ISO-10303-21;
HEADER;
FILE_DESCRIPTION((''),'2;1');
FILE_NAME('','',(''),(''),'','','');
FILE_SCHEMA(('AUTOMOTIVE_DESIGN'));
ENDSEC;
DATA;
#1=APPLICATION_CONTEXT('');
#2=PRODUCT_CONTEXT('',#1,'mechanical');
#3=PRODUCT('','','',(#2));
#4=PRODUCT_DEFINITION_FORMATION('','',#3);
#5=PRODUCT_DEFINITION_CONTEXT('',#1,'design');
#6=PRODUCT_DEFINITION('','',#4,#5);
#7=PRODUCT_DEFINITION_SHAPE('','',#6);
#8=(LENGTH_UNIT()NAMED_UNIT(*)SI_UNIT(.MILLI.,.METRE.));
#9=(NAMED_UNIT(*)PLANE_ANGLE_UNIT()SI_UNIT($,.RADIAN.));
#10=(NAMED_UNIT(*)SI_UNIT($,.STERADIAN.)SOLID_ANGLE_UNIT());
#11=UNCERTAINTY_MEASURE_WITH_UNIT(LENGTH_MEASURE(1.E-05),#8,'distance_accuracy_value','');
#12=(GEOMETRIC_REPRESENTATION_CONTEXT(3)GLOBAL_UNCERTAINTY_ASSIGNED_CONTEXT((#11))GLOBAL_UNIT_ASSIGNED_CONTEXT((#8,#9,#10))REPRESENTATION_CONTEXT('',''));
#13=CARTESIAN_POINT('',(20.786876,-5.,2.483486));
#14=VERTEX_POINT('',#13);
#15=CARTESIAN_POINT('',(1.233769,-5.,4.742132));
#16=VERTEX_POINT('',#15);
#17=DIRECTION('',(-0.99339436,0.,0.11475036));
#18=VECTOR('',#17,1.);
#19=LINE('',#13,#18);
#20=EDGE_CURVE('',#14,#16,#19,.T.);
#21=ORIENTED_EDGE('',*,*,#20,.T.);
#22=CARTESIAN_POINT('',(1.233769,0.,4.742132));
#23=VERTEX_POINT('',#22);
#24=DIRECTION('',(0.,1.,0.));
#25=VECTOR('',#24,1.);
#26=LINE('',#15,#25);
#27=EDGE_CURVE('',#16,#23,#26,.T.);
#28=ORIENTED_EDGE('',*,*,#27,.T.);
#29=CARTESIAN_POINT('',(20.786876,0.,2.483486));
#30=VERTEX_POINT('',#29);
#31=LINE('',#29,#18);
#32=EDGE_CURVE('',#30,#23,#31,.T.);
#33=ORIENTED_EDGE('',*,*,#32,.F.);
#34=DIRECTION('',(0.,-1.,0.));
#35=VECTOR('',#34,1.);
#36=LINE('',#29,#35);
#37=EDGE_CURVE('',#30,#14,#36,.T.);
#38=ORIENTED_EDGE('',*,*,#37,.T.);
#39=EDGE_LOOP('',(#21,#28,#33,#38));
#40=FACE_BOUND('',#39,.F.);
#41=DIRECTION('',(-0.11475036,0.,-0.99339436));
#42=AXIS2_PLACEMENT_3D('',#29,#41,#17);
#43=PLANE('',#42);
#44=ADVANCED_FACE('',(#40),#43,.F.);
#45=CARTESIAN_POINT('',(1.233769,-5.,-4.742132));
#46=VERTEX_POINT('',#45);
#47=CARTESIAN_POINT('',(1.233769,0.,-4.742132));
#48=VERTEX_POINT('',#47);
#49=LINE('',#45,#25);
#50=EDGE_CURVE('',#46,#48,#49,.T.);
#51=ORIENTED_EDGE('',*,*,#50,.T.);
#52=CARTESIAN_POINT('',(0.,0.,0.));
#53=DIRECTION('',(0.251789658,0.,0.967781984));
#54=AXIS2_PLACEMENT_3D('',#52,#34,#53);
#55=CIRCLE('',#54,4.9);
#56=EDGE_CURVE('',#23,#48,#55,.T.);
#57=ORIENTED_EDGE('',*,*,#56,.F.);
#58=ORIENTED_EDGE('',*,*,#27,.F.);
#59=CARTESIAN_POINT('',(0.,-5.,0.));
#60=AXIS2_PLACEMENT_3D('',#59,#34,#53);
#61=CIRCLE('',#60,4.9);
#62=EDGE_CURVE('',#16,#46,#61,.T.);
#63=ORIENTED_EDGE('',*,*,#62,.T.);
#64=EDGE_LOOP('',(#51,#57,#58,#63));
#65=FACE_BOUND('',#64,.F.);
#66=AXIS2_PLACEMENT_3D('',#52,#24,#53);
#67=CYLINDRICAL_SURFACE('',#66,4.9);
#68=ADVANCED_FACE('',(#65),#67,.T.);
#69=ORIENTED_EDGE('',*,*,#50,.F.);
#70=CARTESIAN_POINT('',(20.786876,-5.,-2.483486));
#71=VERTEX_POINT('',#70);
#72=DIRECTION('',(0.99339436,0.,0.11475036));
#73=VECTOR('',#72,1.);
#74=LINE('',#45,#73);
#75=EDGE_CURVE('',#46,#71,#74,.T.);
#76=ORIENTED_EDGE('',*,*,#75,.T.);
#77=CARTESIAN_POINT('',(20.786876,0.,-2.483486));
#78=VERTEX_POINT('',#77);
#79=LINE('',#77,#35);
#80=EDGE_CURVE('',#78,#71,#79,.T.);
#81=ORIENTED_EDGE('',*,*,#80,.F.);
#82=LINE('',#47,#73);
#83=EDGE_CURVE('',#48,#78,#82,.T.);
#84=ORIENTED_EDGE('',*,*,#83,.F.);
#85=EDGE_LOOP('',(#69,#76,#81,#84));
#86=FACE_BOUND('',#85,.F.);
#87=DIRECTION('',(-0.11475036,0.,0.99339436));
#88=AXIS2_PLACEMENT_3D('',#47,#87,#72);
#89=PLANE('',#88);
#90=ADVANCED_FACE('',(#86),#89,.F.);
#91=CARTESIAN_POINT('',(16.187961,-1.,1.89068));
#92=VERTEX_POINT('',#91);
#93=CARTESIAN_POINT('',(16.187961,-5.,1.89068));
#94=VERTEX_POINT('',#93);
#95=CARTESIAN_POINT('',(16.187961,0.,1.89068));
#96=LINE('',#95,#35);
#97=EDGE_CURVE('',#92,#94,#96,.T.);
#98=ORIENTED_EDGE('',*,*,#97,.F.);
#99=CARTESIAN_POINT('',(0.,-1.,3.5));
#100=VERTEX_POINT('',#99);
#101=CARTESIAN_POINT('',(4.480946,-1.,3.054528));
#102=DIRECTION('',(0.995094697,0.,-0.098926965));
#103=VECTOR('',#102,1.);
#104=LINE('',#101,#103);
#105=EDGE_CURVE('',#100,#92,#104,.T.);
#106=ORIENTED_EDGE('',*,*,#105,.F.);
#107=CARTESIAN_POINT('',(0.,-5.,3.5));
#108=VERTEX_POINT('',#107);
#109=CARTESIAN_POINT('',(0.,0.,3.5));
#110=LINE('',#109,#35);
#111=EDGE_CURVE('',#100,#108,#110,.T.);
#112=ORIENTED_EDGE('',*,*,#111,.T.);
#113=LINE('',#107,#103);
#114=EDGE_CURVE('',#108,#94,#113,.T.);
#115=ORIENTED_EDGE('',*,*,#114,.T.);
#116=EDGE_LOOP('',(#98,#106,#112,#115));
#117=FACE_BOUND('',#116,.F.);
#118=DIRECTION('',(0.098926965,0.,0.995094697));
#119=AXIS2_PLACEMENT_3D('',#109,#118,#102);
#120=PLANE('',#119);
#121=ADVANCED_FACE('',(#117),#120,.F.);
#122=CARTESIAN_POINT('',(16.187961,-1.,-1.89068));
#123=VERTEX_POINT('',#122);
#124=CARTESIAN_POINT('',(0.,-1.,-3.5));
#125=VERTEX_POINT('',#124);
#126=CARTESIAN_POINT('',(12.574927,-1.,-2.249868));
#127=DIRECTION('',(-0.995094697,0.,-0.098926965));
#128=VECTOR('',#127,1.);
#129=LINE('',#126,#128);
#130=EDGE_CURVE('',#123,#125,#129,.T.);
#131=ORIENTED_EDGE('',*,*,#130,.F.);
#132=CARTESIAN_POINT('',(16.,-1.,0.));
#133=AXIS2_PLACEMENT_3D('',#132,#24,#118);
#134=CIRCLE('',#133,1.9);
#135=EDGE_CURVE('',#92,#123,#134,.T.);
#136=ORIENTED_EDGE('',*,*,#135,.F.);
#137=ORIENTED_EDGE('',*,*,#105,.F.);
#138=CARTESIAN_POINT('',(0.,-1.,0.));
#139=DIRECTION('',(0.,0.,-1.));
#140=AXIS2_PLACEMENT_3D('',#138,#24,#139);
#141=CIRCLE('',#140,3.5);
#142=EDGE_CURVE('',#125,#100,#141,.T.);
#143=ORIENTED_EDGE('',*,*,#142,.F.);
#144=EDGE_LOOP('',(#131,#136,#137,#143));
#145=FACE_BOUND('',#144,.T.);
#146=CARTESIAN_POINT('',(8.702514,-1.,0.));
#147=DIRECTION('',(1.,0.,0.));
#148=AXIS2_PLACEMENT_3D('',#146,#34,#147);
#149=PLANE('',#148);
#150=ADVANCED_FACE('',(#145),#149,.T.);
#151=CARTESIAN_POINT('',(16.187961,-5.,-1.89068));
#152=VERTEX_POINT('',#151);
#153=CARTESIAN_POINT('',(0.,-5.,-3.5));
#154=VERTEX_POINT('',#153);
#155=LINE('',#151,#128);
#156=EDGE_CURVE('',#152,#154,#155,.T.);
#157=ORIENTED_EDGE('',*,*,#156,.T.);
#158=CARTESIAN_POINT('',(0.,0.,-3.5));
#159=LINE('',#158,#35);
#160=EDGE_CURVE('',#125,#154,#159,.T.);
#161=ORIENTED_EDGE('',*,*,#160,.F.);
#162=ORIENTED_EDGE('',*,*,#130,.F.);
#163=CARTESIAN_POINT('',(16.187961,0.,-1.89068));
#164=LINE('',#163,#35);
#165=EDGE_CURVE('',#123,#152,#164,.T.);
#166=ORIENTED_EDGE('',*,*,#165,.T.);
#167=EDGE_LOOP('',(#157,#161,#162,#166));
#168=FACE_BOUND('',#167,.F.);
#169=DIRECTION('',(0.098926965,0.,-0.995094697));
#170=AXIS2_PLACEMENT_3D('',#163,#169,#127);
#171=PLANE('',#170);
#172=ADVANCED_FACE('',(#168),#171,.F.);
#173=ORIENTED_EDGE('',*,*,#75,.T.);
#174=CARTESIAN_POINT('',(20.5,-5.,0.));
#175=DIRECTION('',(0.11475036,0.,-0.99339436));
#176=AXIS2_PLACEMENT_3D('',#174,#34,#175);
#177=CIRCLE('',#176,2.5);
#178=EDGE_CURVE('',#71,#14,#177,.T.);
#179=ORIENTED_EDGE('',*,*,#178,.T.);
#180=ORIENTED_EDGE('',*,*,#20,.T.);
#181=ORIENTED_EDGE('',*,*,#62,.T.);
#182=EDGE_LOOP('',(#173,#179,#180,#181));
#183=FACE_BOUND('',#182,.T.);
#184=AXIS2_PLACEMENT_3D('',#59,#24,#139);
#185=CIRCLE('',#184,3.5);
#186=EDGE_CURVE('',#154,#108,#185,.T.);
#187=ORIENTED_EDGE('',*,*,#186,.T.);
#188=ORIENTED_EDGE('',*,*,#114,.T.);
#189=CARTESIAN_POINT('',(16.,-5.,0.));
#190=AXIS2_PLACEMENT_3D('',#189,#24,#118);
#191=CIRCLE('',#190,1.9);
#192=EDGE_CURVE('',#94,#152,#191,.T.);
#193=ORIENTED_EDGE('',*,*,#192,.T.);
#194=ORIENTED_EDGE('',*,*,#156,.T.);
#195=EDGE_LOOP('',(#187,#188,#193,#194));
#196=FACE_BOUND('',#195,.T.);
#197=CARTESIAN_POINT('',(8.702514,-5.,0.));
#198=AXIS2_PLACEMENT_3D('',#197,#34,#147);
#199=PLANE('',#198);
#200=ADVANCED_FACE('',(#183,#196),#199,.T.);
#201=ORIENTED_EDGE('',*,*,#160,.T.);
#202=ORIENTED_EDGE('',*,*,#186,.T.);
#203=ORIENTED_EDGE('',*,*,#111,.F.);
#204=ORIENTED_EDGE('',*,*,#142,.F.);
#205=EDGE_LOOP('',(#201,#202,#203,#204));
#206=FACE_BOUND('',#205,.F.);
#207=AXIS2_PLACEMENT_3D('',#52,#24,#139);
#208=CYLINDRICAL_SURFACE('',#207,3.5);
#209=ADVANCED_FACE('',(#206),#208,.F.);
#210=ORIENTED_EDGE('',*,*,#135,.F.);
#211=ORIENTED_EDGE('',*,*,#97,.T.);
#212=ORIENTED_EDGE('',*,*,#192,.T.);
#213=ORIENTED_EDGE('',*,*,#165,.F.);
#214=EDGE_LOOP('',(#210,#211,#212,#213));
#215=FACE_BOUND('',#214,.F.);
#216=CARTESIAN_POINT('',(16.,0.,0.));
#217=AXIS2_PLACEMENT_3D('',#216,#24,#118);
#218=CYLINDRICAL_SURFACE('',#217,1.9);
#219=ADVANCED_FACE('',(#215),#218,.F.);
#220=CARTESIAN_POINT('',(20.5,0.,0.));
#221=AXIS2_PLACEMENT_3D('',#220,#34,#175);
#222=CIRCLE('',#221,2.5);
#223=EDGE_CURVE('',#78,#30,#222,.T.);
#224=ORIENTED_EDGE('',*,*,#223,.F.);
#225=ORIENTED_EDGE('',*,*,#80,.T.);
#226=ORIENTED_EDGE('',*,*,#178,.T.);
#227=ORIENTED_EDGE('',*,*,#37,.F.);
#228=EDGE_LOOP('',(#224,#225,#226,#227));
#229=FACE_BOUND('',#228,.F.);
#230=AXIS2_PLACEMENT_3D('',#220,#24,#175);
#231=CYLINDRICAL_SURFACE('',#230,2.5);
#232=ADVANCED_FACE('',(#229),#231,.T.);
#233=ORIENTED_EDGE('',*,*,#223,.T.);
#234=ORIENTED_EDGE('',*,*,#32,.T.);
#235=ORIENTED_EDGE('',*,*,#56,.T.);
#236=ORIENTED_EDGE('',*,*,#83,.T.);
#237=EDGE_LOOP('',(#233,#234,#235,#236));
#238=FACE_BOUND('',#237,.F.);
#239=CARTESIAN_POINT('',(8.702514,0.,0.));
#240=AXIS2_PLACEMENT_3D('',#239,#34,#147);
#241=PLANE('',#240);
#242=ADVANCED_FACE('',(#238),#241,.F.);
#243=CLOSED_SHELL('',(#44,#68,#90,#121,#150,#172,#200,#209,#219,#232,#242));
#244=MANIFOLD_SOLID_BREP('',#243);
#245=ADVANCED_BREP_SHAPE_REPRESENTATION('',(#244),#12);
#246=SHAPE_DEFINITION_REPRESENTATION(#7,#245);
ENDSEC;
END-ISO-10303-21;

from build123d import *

# Parameters (mm, degrees)
F1_DEPTH = 5
F2_DEPTH = 1


# Not quite as in the source:
# - a feature names something its author has since deleted; it is built from what else it names


with BuildPart() as f1:
    # F0 (on Front) → F1 (new body)
    with BuildSketch(Plane.XZ):
        with BuildLine():
            Line((1.2337693236, -4.7421317207), (20.7868759001, -2.4834859005))
            ThreePointArc((20.7868759001, -2.4834859005), (23, 0), (20.7868759001, 2.4834859005))
            Line((20.7868759001, 2.4834859005), (1.2337693236, 4.7421317207))
            ThreePointArc((1.2337693236, 4.7421317207), (-4.9, 0), (1.2337693236, -4.7421317207))
        make_face()
        with BuildLine():
            ThreePointArc((0, -3.5), (-3.5, 0), (0, 3.5))
            Line((0, 3.5), (16.1879612334, 1.8906799239))
            ThreePointArc((16.1879612334, 1.8906799239), (17.9, 0), (16.1879612334, -1.8906799239))
            Line((16.1879612334, -1.8906799239), (0, -3.5))
        make_face(mode=Mode.SUBTRACT)
    extrude(amount=F1_DEPTH)

    # F0 (on Front) → F2 (join)
    with BuildSketch(Plane.XZ):
        with BuildLine():
            Line((1.2337693236, -4.7421317207), (20.7868759001, -2.4834859005))
            ThreePointArc((20.7868759001, -2.4834859005), (23, 0), (20.7868759001, 2.4834859005))
            Line((20.7868759001, 2.4834859005), (1.2337693236, 4.7421317207))
            ThreePointArc((1.2337693236, 4.7421317207), (-4.9, 0), (1.2337693236, -4.7421317207))
        make_face()
        with BuildLine():
            ThreePointArc((0, -3.5), (-3.5, 0), (0, 3.5))
            Line((0, 3.5), (16.1879612334, 1.8906799239))
            ThreePointArc((16.1879612334, 1.8906799239), (17.9, 0), (16.1879612334, -1.8906799239))
            Line((16.1879612334, -1.8906799239), (0, -3.5))
        make_face(mode=Mode.SUBTRACT)
        with BuildLine():
            Line((16.1879612334, 1.8906799239), (0, 3.5))
            ThreePointArc((0, 3.5), (-3.5, 0), (0, -3.5))
            Line((0, -3.5), (16.1879612334, -1.8906799239))
            ThreePointArc((16.1879612334, -1.8906799239), (17.9, 0), (16.1879612334, 1.8906799239))
        make_face()
    extrude(amount=F2_DEPTH)


solid = f1.part
